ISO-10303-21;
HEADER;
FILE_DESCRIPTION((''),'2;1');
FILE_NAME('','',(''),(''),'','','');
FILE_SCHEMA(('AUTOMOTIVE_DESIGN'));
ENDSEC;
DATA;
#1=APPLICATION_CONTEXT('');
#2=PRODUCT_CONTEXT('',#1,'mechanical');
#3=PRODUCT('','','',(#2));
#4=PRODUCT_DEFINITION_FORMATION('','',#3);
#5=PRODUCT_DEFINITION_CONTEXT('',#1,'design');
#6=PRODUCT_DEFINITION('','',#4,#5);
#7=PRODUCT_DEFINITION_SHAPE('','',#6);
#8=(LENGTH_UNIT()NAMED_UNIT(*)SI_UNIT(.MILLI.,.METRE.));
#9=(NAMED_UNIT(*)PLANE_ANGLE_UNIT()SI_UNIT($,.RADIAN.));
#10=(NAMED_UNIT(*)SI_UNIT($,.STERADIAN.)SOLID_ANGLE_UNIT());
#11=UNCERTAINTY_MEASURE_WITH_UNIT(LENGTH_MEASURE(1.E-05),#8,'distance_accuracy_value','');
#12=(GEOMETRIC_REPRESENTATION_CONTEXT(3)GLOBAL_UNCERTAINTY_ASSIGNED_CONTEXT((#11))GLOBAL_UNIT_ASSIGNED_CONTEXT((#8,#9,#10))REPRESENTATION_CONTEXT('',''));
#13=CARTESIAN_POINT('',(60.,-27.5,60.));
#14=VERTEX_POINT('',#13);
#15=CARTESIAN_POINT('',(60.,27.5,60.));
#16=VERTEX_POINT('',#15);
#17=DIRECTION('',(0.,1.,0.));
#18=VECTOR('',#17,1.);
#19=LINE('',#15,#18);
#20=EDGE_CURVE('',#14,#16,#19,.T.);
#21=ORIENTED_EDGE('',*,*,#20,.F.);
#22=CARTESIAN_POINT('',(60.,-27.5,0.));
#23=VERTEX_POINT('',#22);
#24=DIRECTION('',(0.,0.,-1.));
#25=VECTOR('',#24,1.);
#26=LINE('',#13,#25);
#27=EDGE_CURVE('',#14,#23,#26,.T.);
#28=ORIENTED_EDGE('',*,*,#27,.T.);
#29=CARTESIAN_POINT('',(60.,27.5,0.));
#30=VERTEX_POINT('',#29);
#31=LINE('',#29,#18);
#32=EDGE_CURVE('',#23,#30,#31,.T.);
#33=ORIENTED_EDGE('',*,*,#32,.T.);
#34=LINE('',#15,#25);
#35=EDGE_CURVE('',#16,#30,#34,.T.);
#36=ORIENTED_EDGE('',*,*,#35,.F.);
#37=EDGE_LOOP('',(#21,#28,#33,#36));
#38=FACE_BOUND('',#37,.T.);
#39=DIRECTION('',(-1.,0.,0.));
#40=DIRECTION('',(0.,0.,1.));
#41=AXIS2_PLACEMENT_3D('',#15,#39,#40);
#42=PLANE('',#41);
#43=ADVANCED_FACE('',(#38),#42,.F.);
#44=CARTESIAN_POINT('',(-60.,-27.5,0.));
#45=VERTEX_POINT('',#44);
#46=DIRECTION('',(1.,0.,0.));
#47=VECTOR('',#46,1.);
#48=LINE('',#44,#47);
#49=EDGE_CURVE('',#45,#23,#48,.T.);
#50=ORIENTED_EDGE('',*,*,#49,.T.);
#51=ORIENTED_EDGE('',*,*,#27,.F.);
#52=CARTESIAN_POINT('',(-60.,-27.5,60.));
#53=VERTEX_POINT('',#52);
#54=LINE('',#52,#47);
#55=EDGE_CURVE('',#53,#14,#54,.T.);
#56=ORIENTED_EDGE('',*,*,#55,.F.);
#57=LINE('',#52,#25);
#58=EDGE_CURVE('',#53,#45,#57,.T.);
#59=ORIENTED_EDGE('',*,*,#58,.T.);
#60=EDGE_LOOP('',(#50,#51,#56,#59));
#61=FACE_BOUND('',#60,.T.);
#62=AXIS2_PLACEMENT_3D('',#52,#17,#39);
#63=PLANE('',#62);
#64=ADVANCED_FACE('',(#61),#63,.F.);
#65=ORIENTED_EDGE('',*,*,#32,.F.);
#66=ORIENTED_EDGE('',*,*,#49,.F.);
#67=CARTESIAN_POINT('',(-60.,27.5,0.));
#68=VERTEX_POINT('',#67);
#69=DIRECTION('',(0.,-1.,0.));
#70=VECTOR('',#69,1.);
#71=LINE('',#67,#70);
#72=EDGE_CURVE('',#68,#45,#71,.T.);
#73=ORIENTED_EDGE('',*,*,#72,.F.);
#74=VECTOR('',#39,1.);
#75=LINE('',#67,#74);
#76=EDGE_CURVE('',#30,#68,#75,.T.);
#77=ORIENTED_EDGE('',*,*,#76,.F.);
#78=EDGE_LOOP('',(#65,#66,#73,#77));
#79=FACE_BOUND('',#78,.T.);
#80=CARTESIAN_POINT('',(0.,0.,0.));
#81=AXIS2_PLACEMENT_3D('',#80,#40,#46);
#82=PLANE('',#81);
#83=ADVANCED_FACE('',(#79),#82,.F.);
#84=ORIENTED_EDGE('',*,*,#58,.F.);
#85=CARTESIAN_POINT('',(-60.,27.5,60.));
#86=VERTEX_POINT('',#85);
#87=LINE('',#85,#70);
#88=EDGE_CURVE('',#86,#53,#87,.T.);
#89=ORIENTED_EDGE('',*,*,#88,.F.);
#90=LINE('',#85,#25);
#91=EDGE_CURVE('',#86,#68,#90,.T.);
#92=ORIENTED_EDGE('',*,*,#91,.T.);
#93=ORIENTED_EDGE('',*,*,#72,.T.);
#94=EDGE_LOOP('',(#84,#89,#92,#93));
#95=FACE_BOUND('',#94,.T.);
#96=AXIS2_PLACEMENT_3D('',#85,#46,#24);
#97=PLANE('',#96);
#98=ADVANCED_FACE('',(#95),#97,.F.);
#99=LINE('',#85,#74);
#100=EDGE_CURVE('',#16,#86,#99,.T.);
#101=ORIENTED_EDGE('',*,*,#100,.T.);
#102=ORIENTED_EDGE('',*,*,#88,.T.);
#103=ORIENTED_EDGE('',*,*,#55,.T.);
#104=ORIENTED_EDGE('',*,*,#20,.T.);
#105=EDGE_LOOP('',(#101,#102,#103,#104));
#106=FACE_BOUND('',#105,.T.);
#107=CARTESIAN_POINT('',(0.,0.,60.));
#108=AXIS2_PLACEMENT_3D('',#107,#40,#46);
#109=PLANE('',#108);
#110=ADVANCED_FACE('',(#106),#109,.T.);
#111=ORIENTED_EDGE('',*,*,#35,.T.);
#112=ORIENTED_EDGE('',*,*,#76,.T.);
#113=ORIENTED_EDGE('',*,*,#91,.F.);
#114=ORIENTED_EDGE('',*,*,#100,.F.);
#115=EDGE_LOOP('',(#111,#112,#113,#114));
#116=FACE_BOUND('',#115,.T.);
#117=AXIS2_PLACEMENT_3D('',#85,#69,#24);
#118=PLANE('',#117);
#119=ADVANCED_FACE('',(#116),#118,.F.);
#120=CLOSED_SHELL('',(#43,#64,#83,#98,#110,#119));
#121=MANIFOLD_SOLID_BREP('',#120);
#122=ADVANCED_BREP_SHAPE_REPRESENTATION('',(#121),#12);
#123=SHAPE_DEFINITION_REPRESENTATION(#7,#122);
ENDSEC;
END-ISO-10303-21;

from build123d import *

# Parameters (mm, degrees)
SKETCH_1_W      = 120
SKETCH_1_H      = 55
EXTRUDE_1_DEPTH = 60


with BuildPart() as part:
    # 草圖1 → 填料-伸長1 (new body)
    with BuildSketch(Plane.XY):
        Rectangle(SKETCH_1_W, SKETCH_1_H)
    extrude(amount=EXTRUDE_1_DEPTH)


solid = part.part
